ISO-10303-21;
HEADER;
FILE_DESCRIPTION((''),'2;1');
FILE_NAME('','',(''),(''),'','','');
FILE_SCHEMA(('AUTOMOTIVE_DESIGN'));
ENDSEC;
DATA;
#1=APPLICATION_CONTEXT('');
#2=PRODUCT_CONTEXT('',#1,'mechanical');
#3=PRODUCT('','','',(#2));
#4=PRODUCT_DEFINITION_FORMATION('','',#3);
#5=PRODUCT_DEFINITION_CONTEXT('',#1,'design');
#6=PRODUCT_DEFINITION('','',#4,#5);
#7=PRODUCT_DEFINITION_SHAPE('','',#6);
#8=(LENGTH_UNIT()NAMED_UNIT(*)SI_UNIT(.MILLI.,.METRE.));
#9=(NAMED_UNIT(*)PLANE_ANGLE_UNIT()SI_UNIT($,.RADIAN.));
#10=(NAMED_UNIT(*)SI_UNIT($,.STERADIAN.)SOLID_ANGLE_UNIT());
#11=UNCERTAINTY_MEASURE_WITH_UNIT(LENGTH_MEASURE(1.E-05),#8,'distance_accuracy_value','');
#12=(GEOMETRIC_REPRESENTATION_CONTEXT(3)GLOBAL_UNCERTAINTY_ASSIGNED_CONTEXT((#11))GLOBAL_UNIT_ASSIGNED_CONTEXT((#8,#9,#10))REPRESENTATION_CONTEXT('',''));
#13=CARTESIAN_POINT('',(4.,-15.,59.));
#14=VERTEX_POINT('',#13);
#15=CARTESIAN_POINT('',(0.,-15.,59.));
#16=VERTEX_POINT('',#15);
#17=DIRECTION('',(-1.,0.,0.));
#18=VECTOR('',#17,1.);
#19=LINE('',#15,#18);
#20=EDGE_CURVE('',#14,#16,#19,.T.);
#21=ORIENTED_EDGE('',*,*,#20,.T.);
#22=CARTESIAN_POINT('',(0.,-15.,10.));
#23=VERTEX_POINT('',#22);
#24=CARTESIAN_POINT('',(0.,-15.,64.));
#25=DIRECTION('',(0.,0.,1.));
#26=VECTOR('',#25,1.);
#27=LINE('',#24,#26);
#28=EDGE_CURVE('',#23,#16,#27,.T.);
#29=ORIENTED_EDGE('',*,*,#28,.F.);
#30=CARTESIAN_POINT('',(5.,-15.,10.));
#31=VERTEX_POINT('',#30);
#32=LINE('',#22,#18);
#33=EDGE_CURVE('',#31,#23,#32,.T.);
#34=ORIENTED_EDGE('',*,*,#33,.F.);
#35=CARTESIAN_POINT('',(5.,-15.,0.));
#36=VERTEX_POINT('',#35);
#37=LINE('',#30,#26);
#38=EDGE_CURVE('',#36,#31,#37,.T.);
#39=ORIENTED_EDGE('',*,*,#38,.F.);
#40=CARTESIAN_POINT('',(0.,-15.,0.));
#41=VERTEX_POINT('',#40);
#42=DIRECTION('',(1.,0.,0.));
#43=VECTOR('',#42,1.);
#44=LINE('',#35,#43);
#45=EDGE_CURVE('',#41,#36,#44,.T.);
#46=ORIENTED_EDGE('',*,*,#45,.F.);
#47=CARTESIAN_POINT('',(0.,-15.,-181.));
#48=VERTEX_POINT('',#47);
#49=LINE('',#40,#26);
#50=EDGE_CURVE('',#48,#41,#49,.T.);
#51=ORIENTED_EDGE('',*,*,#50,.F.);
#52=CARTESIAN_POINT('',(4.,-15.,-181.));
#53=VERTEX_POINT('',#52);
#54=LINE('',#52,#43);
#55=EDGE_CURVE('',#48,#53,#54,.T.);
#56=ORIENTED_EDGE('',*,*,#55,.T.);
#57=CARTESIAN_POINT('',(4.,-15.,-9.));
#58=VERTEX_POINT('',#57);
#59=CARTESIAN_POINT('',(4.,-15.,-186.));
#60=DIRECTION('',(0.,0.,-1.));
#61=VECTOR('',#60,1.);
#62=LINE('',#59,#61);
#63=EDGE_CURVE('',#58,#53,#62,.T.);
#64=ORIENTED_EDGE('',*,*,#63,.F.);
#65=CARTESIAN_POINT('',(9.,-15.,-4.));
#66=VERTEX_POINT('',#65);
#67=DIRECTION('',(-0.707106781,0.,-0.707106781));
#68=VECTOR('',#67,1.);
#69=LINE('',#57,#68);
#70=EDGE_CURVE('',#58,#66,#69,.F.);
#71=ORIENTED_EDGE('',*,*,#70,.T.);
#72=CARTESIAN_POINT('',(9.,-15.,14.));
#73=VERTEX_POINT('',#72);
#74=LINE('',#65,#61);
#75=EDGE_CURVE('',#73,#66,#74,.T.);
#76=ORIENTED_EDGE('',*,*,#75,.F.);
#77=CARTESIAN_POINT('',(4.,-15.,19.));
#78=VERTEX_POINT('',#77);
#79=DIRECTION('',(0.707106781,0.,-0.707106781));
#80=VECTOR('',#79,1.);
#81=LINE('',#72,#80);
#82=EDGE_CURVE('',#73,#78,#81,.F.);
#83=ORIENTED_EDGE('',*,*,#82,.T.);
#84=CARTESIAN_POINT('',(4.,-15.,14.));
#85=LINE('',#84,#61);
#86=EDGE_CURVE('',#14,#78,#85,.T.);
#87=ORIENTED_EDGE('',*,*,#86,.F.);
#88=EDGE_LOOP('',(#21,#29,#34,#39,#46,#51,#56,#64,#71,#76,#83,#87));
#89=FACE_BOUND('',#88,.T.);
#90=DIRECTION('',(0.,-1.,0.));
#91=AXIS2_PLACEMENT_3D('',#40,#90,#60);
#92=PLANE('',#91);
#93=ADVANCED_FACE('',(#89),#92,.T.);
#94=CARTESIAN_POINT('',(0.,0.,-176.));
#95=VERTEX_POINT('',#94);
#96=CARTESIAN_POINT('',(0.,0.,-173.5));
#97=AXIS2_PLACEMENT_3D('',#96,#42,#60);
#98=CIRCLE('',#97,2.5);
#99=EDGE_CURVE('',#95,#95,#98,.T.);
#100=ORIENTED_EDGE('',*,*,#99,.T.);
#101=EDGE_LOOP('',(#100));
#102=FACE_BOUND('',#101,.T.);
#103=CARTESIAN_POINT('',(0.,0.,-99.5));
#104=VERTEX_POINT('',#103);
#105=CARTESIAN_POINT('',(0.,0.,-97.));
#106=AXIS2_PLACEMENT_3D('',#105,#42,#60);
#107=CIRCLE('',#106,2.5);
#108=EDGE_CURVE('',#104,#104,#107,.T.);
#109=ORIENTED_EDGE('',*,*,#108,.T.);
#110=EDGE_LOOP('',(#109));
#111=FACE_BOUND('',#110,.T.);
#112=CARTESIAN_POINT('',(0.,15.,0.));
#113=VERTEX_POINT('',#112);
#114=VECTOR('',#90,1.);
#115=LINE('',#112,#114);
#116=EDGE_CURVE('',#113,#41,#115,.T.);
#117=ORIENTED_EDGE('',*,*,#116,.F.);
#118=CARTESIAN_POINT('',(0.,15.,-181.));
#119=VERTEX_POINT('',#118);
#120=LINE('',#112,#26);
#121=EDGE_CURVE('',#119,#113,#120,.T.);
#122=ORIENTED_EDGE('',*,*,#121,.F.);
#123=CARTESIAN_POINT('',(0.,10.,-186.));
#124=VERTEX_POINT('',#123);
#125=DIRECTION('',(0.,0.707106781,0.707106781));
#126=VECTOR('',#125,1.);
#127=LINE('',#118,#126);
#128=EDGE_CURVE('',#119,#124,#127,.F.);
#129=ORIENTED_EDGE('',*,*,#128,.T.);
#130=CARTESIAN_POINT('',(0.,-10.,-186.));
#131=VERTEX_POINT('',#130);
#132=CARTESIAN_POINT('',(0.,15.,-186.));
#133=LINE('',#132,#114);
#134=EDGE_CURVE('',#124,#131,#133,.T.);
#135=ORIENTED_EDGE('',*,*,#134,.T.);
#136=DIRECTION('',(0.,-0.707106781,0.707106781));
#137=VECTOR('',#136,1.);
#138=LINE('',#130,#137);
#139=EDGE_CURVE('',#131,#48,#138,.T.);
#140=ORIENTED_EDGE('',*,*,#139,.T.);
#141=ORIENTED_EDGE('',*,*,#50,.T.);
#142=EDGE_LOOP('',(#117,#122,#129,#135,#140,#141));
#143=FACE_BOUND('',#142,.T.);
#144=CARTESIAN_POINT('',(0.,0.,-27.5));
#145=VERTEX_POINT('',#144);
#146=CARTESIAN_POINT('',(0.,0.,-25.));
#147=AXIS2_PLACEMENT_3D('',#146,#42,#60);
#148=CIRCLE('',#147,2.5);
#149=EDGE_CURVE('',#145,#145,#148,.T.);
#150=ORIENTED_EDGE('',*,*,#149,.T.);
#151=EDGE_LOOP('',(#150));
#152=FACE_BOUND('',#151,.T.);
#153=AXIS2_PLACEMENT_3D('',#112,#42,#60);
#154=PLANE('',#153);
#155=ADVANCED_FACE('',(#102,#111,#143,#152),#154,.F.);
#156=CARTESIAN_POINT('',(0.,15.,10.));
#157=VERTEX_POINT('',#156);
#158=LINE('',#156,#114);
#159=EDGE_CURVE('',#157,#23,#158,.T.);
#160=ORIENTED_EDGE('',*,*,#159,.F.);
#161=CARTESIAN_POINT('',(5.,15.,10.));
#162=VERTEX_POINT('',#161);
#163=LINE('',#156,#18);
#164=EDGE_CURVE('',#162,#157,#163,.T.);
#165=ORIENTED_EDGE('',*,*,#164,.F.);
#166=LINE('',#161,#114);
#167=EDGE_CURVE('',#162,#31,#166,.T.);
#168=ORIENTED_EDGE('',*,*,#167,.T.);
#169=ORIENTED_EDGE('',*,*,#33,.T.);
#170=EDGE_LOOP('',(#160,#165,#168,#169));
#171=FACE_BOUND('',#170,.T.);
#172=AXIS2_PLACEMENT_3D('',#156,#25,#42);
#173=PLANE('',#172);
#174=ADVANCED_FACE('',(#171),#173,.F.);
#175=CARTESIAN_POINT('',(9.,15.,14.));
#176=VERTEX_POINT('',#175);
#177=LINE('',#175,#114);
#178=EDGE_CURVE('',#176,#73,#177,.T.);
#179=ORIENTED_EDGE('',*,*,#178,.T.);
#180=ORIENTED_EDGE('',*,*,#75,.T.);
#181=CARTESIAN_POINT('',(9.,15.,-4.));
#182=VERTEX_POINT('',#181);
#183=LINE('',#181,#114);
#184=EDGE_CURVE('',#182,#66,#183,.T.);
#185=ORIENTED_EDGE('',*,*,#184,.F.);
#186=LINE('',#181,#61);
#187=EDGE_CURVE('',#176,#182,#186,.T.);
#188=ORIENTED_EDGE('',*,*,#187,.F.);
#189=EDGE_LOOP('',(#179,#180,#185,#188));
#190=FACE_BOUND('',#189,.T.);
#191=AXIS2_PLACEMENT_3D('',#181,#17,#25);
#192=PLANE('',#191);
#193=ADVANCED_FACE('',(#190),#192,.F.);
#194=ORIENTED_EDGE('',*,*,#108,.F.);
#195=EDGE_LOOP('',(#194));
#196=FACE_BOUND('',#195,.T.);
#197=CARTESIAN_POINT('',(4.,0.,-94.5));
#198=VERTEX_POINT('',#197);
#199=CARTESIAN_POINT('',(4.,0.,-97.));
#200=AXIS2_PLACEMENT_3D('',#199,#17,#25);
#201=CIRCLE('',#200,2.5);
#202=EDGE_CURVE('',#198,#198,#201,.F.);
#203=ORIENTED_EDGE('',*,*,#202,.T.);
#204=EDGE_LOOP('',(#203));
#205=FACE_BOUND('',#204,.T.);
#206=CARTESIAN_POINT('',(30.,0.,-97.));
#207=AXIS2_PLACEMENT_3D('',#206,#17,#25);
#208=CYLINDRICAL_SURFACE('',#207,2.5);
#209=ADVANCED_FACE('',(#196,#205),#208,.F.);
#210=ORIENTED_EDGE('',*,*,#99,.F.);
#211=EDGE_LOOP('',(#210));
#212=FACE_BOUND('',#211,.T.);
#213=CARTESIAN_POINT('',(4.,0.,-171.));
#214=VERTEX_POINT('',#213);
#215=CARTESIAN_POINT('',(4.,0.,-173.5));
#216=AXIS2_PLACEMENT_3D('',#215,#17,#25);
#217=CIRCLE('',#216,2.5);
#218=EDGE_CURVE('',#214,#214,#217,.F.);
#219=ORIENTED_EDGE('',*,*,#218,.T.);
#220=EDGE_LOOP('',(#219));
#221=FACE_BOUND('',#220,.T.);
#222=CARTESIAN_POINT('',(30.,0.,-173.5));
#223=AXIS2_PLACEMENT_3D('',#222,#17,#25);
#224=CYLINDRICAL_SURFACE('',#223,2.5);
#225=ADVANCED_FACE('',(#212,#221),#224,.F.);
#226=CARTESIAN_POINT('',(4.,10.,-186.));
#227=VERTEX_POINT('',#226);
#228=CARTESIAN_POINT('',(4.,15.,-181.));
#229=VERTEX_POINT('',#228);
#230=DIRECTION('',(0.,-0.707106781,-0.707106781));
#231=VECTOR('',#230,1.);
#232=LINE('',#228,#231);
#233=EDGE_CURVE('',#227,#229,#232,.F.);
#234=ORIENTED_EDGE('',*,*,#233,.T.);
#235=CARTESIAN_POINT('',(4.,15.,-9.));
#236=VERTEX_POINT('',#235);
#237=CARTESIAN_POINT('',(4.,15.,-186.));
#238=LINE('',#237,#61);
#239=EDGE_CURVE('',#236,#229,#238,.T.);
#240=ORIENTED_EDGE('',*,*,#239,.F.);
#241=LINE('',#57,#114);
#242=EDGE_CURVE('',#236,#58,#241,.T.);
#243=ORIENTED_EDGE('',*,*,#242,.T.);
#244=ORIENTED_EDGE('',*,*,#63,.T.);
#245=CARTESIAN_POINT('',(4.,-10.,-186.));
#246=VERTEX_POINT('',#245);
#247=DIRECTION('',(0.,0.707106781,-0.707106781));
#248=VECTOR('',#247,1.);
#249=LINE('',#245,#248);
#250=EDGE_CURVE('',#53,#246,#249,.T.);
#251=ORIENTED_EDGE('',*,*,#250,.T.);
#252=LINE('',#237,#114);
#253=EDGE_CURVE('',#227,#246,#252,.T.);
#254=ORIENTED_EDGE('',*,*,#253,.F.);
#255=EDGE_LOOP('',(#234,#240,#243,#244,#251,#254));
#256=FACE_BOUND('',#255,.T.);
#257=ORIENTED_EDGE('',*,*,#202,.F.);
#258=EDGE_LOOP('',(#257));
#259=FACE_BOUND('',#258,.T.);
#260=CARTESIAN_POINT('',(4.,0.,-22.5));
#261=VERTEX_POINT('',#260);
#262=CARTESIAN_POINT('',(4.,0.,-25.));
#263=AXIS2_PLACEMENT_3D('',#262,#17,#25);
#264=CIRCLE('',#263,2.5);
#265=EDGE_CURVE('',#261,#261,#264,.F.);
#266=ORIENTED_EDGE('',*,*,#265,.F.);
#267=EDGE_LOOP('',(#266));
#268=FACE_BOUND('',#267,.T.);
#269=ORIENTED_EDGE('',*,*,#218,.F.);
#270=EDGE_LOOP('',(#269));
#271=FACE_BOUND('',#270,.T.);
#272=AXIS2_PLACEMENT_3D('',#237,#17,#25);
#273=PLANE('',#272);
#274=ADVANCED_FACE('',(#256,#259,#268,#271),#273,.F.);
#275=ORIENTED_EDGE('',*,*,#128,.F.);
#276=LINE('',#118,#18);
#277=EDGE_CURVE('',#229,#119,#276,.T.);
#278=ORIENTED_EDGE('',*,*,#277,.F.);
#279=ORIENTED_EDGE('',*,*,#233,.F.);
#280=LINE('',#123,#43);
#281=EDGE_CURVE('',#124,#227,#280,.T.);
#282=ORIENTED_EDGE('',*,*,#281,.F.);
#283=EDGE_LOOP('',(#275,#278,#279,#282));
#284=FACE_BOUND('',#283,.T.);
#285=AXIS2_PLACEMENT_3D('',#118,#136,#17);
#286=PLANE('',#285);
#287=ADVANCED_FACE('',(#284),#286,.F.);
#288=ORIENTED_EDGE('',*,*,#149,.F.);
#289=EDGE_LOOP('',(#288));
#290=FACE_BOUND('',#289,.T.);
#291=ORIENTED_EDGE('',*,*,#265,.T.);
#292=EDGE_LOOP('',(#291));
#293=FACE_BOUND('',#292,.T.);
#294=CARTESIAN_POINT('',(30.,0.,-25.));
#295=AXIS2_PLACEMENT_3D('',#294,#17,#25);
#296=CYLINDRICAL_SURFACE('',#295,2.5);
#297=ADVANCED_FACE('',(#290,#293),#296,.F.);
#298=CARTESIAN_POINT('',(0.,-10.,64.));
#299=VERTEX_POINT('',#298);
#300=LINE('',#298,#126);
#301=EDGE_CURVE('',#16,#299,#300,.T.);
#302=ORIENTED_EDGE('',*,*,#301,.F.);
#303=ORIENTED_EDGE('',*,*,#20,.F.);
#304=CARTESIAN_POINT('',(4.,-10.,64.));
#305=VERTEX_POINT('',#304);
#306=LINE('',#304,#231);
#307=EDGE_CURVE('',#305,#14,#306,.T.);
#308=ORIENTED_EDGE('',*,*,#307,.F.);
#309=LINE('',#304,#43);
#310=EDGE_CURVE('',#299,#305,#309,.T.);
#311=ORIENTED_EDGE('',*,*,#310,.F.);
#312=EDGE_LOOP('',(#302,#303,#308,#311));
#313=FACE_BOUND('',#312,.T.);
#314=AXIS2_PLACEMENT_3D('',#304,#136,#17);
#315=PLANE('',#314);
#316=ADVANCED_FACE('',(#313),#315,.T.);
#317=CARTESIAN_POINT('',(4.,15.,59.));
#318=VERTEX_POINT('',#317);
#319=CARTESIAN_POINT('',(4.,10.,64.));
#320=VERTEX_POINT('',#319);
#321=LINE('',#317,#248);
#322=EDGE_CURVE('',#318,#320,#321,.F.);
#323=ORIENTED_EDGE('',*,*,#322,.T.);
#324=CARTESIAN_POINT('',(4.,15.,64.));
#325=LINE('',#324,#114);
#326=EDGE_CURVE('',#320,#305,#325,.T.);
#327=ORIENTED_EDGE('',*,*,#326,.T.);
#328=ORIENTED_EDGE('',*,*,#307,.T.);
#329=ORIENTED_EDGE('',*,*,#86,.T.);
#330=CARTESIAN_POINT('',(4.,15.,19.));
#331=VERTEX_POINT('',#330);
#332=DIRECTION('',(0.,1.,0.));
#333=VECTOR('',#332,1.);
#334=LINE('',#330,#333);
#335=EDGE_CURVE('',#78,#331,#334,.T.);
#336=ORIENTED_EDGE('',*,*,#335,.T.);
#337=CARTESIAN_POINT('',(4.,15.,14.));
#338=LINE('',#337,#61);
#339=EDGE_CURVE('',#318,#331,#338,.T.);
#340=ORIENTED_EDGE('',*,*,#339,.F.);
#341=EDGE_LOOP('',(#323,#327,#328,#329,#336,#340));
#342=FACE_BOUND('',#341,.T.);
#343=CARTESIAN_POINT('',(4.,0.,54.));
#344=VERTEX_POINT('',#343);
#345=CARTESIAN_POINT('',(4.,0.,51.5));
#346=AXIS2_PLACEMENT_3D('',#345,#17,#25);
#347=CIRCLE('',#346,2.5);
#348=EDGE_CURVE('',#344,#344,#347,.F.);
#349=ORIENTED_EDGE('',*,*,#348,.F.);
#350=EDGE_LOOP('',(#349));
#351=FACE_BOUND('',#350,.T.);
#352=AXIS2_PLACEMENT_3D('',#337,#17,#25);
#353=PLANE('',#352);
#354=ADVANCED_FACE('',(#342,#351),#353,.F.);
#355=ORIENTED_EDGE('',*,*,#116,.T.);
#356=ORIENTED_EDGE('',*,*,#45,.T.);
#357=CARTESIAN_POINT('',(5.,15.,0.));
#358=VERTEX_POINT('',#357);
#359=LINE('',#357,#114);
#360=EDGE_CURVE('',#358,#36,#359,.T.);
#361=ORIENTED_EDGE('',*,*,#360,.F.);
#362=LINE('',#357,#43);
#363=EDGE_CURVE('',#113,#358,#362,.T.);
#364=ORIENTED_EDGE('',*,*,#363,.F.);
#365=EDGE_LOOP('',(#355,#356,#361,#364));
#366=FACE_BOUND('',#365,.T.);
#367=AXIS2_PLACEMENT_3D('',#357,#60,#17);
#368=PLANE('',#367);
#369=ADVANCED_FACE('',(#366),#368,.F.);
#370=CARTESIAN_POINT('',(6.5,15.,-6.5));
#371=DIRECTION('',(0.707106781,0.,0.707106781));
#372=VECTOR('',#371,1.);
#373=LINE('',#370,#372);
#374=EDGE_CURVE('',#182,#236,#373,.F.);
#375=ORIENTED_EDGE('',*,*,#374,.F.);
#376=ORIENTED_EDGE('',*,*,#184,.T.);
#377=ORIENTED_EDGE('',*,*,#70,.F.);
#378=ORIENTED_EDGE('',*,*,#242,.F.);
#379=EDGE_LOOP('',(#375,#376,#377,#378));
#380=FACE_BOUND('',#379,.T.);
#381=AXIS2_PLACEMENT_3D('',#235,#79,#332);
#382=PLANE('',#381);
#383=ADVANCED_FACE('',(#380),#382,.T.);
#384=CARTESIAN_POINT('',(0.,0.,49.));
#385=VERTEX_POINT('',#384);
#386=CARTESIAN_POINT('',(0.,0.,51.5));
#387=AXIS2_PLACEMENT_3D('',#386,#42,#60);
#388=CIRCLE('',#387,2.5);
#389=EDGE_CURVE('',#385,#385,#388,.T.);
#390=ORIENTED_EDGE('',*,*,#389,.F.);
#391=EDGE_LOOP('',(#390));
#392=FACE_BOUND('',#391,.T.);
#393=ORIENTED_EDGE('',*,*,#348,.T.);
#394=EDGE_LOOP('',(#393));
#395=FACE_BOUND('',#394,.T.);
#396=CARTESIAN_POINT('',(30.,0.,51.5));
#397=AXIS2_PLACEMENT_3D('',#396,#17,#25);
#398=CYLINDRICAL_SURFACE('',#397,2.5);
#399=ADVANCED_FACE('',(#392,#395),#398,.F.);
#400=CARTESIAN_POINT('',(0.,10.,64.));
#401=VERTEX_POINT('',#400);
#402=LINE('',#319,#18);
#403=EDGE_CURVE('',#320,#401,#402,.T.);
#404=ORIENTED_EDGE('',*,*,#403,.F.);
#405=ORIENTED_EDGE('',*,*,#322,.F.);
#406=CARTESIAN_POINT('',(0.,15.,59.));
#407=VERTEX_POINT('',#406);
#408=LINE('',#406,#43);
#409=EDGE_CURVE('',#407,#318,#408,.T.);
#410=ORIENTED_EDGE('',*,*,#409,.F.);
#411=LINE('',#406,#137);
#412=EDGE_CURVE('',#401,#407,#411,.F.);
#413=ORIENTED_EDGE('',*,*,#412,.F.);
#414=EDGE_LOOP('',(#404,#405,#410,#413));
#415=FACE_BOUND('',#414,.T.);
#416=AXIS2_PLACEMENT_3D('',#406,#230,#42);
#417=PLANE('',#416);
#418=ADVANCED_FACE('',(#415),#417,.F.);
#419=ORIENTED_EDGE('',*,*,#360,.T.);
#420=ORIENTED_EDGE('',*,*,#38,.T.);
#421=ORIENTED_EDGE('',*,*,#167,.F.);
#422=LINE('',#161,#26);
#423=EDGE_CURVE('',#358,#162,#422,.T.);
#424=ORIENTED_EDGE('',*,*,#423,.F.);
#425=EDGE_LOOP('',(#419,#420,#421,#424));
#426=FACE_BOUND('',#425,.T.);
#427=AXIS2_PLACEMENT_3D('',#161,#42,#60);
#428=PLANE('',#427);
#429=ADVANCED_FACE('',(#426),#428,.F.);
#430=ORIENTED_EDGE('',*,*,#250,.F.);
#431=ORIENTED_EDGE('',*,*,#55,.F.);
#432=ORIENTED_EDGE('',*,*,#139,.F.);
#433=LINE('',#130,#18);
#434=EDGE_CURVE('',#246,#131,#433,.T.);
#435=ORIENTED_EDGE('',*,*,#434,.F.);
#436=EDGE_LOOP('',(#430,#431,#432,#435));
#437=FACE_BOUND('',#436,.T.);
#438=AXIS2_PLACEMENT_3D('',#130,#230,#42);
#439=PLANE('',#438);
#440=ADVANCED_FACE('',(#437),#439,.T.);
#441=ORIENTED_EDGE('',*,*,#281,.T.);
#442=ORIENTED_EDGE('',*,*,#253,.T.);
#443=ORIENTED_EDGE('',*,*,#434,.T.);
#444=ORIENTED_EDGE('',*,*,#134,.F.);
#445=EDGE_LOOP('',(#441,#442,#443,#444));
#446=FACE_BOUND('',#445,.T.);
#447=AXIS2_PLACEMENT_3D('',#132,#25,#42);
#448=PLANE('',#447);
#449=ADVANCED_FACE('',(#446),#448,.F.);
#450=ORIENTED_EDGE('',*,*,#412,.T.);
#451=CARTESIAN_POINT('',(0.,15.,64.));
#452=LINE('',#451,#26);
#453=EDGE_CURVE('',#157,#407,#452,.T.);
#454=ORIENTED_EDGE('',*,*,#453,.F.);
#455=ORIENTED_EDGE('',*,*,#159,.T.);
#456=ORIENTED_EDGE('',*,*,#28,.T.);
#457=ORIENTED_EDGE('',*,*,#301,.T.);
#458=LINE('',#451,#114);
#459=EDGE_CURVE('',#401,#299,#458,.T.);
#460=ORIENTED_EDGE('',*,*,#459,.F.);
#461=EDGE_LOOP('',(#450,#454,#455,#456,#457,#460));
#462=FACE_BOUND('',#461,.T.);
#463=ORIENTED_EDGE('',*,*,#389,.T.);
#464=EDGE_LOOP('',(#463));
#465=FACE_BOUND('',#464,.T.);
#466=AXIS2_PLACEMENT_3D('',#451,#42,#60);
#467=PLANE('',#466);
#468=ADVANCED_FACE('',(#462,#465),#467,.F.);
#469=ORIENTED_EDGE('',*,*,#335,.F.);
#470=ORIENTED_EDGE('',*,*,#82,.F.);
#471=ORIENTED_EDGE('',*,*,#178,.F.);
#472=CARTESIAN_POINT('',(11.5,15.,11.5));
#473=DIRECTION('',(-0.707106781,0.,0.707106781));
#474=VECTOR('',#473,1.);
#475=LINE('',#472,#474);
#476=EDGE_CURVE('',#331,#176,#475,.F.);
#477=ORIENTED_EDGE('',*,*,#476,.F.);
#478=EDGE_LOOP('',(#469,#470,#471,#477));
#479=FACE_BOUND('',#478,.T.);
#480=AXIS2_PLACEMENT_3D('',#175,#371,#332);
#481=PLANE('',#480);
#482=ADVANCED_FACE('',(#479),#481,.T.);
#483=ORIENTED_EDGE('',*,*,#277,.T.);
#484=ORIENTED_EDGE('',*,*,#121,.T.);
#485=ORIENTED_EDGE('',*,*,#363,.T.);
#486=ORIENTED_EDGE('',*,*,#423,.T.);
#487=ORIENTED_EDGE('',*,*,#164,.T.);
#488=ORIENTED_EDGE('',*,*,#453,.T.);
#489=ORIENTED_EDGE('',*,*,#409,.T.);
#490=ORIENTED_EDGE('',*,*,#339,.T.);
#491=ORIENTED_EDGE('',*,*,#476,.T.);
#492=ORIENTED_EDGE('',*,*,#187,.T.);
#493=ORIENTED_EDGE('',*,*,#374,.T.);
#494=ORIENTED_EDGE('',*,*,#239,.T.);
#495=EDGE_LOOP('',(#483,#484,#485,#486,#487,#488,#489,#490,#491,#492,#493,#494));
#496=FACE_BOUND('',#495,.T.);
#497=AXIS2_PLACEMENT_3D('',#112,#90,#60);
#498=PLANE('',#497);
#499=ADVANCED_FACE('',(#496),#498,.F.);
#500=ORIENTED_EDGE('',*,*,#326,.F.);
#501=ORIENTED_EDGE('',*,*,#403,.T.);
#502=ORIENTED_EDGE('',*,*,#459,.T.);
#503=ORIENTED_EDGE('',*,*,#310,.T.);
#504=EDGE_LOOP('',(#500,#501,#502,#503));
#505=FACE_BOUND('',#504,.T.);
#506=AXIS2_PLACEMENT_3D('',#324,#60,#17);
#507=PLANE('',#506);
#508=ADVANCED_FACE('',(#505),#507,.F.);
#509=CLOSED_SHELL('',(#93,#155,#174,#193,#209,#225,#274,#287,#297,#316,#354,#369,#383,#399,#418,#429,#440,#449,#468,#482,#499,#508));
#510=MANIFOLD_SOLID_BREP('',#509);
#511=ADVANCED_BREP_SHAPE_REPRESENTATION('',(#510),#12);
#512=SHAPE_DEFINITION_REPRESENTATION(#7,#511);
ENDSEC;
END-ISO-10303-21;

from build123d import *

# Parameters (mm, degrees)
SALIENTE_EXTRUIR1_DEPTH = 15
CROQUIS2_R              = 2.5
CORTAR_EXTRUIR2_DEPTH   = 30
CHAFL_N1_SIZE           = 5


with BuildPart() as part:
    # Croquis1 → Saliente-Extruir1 (new, symmetric)
    with BuildSketch(Plane(origin=(0, 0, 0), x_dir=(1, 0, 0), z_dir=(0, 1, 0))):
        Polygon((0, 0), (0, 186), (4, 186), (4, 4), (9, 4), (9, -14), (4, -14), (4, -64), (0, -64), (0, -10), (5, -10), (5, 0), align=None)
    extrude(amount=SALIENTE_EXTRUIR1_DEPTH, both=True)

    # Croquis2 → Cortar-Extruir2 (cut)
    with BuildSketch(Plane(origin=(0, 0, 0), x_dir=(0, 0, -1), z_dir=(1, 0, 0))):
        with Locations(Location((-51.5, 0, 0), (0, 0, 180))):
            Circle(CROQUIS2_R)
        with Locations(Location((25, 0, 0), (0, 0, 180))):
            Circle(CROQUIS2_R)
        with Locations(Location((97, 0, 0), (0, 0, 180))):
            Circle(CROQUIS2_R)
        with Locations(Location((173.5, 0, 0), (0, 0, 180))):
            Circle(CROQUIS2_R)
    extrude(amount=CORTAR_EXTRUIR2_DEPTH, mode=Mode.SUBTRACT)

    # Chaflán1
    chafl_n1_edges = [part.edges().sort_by_distance(p)[0] for p in [
        (2, -15, -186),
        (2, 15, -186),
        (2, -15, 64),
        (2, 15, 64),
        (4, 0, -4),
        (4, 0, 14),
    ]]
    chamfer(chafl_n1_edges, length=CHAFL_N1_SIZE - 0.0001)  # a hair under: the kernel refuses the full size


solid = part.part
